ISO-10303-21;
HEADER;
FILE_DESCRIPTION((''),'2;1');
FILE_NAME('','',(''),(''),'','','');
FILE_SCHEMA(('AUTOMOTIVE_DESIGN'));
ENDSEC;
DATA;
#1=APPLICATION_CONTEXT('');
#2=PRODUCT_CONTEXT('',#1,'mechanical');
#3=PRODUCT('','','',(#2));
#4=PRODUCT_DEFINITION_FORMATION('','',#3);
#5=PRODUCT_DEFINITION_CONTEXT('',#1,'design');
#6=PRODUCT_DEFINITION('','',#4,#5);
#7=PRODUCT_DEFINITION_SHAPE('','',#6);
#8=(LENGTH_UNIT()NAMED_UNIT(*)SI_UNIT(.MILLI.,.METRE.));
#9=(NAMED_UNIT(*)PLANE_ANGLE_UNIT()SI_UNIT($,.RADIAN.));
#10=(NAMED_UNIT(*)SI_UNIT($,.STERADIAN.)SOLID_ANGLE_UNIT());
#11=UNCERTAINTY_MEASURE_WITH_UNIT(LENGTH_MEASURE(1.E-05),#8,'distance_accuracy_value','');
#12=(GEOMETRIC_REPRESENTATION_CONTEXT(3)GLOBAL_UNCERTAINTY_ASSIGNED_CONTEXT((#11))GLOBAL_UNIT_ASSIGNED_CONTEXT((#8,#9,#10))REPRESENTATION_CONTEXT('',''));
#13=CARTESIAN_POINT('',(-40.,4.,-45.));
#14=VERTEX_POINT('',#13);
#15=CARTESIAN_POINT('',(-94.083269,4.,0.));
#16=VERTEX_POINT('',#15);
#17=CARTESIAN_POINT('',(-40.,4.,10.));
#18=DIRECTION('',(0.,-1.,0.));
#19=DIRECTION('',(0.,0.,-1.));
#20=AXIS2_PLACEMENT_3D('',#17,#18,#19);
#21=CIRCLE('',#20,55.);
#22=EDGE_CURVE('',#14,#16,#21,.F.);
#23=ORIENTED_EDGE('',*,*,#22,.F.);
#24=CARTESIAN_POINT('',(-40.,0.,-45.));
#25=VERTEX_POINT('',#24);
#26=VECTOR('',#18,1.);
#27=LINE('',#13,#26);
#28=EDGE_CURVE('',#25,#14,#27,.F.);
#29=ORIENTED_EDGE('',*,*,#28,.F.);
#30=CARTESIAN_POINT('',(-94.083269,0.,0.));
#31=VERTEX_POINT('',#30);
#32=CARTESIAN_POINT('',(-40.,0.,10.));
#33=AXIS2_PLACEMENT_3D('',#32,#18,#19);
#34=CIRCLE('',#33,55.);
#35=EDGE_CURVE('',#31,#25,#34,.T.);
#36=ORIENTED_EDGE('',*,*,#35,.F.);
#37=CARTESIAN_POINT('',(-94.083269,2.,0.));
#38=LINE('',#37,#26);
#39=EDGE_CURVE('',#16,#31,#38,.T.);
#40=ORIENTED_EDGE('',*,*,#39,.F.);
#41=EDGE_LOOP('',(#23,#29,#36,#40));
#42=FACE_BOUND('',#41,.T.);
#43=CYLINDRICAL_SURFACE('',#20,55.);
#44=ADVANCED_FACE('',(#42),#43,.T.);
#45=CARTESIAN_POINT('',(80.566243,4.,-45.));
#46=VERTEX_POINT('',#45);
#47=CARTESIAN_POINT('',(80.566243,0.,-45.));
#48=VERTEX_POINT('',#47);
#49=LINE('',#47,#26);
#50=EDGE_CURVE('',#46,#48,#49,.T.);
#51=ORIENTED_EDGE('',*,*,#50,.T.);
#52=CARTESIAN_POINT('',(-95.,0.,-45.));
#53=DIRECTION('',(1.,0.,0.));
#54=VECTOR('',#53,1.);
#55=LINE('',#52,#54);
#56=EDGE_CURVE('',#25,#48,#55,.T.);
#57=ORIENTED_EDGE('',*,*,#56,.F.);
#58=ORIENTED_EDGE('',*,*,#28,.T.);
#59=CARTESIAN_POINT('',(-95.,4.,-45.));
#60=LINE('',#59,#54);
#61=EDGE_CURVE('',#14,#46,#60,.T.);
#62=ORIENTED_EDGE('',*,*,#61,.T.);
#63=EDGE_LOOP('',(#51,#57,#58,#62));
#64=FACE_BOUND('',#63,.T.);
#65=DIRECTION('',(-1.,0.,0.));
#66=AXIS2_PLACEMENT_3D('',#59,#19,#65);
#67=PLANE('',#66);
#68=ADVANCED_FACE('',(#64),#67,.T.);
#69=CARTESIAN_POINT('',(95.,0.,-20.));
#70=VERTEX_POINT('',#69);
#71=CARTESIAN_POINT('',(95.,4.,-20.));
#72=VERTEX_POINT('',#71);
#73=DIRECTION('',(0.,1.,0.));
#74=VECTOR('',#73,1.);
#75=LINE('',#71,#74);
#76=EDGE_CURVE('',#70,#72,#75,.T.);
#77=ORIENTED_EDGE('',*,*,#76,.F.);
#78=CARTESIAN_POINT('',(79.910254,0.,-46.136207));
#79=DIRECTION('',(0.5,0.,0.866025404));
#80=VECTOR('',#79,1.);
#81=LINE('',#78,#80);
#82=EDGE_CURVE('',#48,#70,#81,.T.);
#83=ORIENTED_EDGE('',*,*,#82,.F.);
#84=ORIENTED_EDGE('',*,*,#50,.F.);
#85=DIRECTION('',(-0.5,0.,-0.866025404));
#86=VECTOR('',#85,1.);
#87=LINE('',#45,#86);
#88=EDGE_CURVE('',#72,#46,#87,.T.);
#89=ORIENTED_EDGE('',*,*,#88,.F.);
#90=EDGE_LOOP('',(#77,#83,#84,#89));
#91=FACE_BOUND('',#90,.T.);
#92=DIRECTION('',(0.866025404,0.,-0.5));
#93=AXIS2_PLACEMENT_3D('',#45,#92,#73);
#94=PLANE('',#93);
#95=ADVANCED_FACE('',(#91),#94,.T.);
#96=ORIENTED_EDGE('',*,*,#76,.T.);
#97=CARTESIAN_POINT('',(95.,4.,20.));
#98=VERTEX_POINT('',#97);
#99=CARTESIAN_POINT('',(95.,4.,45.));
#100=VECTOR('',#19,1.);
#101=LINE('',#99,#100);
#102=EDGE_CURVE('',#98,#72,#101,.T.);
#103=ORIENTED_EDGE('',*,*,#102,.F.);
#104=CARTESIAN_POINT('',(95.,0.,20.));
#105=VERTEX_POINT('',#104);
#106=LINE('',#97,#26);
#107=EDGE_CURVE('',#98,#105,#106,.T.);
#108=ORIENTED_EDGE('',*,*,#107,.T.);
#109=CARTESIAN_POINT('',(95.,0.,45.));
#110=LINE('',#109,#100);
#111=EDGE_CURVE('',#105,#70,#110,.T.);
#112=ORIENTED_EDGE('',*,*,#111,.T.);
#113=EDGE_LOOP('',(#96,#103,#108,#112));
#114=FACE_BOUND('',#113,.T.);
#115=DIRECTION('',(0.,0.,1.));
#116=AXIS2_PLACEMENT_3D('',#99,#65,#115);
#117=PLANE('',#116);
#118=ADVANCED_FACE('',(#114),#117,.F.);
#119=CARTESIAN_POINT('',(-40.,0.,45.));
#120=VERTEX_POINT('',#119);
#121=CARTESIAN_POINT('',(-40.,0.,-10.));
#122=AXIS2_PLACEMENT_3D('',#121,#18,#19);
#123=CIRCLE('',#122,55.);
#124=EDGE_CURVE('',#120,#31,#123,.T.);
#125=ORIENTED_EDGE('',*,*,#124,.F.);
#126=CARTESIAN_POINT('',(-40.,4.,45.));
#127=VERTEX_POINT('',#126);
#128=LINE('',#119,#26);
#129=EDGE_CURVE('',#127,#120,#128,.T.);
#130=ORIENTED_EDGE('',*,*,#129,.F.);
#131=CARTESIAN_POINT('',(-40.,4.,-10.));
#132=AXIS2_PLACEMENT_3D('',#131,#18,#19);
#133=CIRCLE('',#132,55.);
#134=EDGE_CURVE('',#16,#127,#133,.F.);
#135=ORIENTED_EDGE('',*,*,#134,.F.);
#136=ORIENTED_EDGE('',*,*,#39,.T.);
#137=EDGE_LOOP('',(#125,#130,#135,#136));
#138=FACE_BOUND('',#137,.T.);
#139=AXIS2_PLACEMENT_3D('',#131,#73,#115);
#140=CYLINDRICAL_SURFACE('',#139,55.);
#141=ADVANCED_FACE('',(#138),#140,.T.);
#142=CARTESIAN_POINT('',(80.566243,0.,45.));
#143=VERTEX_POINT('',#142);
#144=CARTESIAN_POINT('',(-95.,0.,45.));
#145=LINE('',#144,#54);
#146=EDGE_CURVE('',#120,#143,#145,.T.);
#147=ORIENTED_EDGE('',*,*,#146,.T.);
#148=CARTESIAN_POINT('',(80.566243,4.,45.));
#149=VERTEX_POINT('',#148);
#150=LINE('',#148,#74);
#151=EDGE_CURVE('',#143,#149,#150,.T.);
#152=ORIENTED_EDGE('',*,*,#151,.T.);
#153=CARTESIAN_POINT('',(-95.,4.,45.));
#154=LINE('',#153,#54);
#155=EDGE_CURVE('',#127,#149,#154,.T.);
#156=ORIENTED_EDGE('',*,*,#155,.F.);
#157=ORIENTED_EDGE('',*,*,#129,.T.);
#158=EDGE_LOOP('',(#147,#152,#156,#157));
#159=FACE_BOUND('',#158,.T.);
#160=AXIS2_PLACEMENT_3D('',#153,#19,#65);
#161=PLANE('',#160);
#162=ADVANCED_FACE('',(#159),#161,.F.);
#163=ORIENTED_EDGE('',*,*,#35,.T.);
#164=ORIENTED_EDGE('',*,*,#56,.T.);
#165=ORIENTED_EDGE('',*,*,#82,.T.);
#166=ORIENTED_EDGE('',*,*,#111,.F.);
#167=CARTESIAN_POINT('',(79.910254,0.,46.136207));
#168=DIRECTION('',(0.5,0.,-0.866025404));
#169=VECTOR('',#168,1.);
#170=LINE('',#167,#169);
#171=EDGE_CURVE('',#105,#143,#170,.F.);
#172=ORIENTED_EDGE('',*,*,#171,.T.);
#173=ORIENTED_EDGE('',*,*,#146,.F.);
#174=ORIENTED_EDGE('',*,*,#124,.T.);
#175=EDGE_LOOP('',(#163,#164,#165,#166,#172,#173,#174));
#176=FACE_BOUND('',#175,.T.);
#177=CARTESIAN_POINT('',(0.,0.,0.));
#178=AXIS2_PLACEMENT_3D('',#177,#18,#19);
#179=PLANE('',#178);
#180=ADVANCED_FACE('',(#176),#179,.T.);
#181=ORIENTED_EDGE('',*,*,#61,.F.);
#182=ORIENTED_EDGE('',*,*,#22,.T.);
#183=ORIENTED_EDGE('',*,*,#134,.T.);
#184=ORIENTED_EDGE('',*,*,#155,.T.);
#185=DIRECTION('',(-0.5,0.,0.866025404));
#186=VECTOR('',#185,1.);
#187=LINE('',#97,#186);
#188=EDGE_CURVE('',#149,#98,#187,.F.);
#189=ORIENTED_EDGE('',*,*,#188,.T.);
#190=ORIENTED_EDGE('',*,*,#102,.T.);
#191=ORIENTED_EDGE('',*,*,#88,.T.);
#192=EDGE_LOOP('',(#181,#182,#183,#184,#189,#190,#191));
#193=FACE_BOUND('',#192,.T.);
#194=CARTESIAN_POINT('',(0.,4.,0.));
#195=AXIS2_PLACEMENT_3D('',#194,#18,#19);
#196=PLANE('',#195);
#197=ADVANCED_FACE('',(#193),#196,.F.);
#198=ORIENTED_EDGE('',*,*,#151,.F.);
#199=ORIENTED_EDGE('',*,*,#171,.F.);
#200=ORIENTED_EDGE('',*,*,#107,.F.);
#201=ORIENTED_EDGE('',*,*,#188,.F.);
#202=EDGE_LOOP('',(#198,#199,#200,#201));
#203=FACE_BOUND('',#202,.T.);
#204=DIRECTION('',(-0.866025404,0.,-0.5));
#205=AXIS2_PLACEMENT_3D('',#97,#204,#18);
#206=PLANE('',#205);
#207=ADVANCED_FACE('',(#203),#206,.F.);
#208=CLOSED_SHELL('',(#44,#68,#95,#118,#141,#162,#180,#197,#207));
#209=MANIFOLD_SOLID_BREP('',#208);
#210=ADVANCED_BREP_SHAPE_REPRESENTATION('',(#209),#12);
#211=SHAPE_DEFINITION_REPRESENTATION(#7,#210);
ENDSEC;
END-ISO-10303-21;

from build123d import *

# Parameters (mm, degrees)
ESQUISSE1_W        = 190
ESQUISSE1_H        = 90
BOSS_EXTRU_1_DEPTH = 4
CONG_1_R           = 55
CHANFREIN1_SIZE    = 25
CHANFREIN1_SIZE2   = 14.43375673


with BuildPart() as part:
    # Esquisse1 → Boss.-Extru.1 (new body)
    with BuildSketch(Plane(origin=(0, 0, 0), x_dir=(1, 0, 0), z_dir=(0, 1, 0))):
        Rectangle(ESQUISSE1_W, ESQUISSE1_H)
    extrude(amount=BOSS_EXTRU_1_DEPTH)

    # Congé1
    # the kernel refuses this fillet: 55 mm, written as the material it takes off along each edge
    with BuildSketch(Plane(origin=(-95, -137.5, 45), x_dir=(1, 0, 0), z_dir=(0, 1, 0))) as cong_1_piece_1:
        with BuildLine():
            CenterArc((CONG_1_R, CONG_1_R), CONG_1_R, 180, 90)
            Line((0, CONG_1_R), (0, 0))
            Line((0, 0), (CONG_1_R, 0))
        make_face()
    extrude(amount=279, mode=Mode.SUBTRACT)
    with BuildSketch(Plane(origin=(-95, -137.5, -45), x_dir=(1, 0, 0), z_dir=(0, 1, 0))) as cong_1_piece_2:
        with BuildLine():
            CenterArc((CONG_1_R, -CONG_1_R), CONG_1_R, 90, 90)
            Line((0, -CONG_1_R), (0, 0))
            Line((0, 0), (CONG_1_R, 0))
        make_face()
    extrude(amount=279, mode=Mode.SUBTRACT)

    # Chanfrein1
    chanfrein1_edges = [part.edges().sort_by_distance(p)[0] for p in [
        (95, 2, 45),
        (95, 2, -45),
    ]]
    chanfrein1_side = [part.faces().sort_by_distance(p)[0] for p in [
        (95, 2, 0),
    ]]
    chamfer(chanfrein1_edges, length=CHANFREIN1_SIZE, length2=CHANFREIN1_SIZE2, reference=chanfrein1_side[0])


solid = part.part
